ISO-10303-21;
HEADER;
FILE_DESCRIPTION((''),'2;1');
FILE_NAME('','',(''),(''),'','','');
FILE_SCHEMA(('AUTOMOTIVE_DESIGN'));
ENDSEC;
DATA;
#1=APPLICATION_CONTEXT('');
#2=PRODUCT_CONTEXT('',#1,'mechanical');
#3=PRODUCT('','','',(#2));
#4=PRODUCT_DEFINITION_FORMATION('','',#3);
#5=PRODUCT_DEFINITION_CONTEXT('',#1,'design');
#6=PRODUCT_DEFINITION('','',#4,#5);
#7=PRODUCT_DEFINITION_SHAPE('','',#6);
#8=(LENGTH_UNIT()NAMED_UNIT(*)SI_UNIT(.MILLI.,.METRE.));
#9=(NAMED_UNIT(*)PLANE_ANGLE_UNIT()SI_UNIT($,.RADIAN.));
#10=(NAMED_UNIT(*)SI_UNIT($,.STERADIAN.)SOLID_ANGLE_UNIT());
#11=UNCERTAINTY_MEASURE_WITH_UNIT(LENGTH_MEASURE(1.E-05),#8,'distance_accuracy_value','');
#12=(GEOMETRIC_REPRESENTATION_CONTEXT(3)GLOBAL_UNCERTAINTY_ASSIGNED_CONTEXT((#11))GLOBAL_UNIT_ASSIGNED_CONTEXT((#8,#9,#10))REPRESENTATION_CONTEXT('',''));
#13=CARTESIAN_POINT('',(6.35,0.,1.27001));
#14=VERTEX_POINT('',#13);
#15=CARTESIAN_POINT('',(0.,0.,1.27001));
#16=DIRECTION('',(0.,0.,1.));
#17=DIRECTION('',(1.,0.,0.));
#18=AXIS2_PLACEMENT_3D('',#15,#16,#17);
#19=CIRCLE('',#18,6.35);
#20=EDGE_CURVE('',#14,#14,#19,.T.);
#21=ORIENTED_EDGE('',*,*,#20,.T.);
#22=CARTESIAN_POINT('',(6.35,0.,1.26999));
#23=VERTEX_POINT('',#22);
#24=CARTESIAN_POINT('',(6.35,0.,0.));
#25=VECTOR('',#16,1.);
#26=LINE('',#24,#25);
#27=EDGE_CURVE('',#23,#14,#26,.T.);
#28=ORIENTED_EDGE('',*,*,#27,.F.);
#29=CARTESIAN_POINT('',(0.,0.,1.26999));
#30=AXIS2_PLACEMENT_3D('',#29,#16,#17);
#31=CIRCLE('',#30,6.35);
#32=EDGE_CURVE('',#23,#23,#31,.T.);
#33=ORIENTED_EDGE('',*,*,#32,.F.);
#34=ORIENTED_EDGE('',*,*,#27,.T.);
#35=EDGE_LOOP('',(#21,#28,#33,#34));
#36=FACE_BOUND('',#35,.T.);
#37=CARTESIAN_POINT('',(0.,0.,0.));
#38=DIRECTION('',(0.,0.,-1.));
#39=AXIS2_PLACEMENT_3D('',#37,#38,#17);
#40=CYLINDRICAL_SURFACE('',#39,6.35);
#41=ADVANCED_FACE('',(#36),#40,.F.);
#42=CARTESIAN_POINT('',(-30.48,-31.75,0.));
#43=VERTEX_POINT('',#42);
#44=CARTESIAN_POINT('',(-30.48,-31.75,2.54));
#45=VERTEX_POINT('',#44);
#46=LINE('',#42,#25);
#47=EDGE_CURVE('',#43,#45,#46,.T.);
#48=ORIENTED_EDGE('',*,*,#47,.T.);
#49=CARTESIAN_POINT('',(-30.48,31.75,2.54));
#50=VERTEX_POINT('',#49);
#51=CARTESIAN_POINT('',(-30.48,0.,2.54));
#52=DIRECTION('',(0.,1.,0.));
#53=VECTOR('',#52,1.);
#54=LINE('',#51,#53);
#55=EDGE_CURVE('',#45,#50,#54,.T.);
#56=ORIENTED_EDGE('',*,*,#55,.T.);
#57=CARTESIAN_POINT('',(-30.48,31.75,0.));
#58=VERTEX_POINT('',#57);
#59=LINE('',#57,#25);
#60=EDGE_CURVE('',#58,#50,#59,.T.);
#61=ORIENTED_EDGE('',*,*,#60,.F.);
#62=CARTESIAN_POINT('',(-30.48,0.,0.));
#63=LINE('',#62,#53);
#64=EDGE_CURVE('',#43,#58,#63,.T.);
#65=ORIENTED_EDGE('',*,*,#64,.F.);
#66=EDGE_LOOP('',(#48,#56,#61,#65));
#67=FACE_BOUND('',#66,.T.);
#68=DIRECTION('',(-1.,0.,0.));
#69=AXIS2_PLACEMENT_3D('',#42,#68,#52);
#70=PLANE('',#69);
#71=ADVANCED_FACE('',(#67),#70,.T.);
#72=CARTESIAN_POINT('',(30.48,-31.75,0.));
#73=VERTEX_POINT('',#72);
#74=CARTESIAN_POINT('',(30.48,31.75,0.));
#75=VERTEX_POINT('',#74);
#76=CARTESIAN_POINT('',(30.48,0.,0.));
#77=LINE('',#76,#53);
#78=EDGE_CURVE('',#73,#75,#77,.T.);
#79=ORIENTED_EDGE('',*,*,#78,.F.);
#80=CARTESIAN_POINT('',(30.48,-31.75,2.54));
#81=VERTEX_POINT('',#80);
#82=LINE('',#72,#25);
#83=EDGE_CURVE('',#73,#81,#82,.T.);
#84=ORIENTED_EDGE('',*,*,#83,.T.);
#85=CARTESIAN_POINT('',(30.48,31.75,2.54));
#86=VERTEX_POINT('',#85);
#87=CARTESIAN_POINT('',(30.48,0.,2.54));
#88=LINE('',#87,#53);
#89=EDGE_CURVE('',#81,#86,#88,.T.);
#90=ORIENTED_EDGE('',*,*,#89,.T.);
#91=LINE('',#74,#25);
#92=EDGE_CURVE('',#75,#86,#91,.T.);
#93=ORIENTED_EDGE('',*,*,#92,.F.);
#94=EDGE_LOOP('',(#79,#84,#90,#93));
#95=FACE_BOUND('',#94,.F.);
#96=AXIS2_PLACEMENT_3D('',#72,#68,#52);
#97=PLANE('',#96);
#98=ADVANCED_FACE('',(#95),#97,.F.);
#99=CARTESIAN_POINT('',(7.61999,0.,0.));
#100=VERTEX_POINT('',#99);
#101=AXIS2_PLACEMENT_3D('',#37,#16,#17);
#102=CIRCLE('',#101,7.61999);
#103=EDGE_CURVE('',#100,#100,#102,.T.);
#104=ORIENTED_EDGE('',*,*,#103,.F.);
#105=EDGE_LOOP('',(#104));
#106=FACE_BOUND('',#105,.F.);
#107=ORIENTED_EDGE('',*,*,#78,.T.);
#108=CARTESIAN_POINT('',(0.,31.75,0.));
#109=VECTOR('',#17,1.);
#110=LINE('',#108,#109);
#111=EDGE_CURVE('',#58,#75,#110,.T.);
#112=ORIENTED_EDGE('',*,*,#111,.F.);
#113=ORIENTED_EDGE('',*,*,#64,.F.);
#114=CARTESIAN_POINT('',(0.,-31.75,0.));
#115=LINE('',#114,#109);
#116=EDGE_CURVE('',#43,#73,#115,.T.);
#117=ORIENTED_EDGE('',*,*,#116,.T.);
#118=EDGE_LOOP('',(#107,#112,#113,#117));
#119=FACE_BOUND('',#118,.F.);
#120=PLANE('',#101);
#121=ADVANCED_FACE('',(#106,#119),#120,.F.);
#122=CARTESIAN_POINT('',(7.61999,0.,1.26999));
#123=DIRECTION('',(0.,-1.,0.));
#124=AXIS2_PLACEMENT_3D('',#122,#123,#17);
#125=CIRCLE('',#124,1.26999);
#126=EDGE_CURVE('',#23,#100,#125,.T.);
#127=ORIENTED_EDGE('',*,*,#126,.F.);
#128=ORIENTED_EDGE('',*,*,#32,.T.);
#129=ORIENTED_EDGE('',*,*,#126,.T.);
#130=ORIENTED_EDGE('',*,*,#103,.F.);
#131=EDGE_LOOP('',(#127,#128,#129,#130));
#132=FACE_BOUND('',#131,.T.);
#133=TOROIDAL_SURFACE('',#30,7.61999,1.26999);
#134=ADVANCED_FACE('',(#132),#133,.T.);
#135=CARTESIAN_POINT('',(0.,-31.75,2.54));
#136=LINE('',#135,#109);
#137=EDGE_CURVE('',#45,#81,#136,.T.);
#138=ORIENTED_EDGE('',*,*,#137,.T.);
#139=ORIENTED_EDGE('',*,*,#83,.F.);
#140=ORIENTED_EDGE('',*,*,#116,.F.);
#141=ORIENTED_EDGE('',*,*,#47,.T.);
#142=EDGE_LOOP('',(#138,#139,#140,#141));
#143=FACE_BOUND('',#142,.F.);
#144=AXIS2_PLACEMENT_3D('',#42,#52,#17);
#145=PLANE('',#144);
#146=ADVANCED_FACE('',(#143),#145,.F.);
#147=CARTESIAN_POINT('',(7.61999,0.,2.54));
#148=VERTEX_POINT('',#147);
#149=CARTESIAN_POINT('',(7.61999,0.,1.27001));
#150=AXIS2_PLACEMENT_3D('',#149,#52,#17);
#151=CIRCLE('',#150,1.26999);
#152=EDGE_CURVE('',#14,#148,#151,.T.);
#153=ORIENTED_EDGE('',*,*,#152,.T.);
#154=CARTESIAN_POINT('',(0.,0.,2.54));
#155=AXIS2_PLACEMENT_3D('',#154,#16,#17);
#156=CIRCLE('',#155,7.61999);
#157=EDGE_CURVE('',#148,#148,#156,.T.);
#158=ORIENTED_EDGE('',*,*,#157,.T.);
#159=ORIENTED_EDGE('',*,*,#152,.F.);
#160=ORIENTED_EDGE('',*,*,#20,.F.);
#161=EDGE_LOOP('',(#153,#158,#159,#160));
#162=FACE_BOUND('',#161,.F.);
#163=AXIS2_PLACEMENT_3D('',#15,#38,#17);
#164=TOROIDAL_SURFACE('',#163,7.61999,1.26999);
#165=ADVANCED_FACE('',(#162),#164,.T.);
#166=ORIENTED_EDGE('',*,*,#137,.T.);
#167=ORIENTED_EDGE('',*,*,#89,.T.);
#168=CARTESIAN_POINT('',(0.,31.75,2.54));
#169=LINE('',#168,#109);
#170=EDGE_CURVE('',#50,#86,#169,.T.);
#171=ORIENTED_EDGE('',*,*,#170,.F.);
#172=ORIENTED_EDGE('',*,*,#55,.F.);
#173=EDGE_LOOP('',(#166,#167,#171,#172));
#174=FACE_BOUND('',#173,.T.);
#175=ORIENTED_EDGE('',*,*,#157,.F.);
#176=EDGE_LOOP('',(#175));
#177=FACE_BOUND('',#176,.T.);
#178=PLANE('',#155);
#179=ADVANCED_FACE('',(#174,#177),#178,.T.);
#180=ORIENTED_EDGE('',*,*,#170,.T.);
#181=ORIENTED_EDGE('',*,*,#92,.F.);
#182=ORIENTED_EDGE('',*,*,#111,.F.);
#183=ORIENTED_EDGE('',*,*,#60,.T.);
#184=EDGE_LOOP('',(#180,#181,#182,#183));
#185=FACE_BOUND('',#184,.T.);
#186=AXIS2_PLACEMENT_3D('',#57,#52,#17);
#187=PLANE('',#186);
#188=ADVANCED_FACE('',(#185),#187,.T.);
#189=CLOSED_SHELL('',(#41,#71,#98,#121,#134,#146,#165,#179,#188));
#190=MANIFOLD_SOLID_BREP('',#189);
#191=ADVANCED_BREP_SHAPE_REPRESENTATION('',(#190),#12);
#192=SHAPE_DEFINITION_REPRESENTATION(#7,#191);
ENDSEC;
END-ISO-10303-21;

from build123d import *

# Parameters (mm, degrees)
F0_W     = 60.96
F0_H     = 63.5
F0_R     = 6.35
F1_DEPTH = 2.54
F2_R     = 1.26999


# Not quite as in the source:
# - a fillet or chamfer is up to 0.001 mm smaller than in the source, because OpenCascade refuses the exact size


with BuildPart() as f1:
    # F0 (on Top) → F1 (new body)
    with BuildSketch(Plane.XY):
        Rectangle(F0_W, F0_H)
        Circle(F0_R, mode=Mode.SUBTRACT)
    extrude(amount=F1_DEPTH)

    # F2 (radius 1.27 in the source; OpenCascade refuses exactly that, so slightly less here)
    f2_edges = [f1.edges().sort_by_distance(p)[0] for p in [
        (-6.35, 0, 2.54),
        (-6.35, 0, 0),
    ]]
    fillet(f2_edges, radius=F2_R)


solid = f1.part
